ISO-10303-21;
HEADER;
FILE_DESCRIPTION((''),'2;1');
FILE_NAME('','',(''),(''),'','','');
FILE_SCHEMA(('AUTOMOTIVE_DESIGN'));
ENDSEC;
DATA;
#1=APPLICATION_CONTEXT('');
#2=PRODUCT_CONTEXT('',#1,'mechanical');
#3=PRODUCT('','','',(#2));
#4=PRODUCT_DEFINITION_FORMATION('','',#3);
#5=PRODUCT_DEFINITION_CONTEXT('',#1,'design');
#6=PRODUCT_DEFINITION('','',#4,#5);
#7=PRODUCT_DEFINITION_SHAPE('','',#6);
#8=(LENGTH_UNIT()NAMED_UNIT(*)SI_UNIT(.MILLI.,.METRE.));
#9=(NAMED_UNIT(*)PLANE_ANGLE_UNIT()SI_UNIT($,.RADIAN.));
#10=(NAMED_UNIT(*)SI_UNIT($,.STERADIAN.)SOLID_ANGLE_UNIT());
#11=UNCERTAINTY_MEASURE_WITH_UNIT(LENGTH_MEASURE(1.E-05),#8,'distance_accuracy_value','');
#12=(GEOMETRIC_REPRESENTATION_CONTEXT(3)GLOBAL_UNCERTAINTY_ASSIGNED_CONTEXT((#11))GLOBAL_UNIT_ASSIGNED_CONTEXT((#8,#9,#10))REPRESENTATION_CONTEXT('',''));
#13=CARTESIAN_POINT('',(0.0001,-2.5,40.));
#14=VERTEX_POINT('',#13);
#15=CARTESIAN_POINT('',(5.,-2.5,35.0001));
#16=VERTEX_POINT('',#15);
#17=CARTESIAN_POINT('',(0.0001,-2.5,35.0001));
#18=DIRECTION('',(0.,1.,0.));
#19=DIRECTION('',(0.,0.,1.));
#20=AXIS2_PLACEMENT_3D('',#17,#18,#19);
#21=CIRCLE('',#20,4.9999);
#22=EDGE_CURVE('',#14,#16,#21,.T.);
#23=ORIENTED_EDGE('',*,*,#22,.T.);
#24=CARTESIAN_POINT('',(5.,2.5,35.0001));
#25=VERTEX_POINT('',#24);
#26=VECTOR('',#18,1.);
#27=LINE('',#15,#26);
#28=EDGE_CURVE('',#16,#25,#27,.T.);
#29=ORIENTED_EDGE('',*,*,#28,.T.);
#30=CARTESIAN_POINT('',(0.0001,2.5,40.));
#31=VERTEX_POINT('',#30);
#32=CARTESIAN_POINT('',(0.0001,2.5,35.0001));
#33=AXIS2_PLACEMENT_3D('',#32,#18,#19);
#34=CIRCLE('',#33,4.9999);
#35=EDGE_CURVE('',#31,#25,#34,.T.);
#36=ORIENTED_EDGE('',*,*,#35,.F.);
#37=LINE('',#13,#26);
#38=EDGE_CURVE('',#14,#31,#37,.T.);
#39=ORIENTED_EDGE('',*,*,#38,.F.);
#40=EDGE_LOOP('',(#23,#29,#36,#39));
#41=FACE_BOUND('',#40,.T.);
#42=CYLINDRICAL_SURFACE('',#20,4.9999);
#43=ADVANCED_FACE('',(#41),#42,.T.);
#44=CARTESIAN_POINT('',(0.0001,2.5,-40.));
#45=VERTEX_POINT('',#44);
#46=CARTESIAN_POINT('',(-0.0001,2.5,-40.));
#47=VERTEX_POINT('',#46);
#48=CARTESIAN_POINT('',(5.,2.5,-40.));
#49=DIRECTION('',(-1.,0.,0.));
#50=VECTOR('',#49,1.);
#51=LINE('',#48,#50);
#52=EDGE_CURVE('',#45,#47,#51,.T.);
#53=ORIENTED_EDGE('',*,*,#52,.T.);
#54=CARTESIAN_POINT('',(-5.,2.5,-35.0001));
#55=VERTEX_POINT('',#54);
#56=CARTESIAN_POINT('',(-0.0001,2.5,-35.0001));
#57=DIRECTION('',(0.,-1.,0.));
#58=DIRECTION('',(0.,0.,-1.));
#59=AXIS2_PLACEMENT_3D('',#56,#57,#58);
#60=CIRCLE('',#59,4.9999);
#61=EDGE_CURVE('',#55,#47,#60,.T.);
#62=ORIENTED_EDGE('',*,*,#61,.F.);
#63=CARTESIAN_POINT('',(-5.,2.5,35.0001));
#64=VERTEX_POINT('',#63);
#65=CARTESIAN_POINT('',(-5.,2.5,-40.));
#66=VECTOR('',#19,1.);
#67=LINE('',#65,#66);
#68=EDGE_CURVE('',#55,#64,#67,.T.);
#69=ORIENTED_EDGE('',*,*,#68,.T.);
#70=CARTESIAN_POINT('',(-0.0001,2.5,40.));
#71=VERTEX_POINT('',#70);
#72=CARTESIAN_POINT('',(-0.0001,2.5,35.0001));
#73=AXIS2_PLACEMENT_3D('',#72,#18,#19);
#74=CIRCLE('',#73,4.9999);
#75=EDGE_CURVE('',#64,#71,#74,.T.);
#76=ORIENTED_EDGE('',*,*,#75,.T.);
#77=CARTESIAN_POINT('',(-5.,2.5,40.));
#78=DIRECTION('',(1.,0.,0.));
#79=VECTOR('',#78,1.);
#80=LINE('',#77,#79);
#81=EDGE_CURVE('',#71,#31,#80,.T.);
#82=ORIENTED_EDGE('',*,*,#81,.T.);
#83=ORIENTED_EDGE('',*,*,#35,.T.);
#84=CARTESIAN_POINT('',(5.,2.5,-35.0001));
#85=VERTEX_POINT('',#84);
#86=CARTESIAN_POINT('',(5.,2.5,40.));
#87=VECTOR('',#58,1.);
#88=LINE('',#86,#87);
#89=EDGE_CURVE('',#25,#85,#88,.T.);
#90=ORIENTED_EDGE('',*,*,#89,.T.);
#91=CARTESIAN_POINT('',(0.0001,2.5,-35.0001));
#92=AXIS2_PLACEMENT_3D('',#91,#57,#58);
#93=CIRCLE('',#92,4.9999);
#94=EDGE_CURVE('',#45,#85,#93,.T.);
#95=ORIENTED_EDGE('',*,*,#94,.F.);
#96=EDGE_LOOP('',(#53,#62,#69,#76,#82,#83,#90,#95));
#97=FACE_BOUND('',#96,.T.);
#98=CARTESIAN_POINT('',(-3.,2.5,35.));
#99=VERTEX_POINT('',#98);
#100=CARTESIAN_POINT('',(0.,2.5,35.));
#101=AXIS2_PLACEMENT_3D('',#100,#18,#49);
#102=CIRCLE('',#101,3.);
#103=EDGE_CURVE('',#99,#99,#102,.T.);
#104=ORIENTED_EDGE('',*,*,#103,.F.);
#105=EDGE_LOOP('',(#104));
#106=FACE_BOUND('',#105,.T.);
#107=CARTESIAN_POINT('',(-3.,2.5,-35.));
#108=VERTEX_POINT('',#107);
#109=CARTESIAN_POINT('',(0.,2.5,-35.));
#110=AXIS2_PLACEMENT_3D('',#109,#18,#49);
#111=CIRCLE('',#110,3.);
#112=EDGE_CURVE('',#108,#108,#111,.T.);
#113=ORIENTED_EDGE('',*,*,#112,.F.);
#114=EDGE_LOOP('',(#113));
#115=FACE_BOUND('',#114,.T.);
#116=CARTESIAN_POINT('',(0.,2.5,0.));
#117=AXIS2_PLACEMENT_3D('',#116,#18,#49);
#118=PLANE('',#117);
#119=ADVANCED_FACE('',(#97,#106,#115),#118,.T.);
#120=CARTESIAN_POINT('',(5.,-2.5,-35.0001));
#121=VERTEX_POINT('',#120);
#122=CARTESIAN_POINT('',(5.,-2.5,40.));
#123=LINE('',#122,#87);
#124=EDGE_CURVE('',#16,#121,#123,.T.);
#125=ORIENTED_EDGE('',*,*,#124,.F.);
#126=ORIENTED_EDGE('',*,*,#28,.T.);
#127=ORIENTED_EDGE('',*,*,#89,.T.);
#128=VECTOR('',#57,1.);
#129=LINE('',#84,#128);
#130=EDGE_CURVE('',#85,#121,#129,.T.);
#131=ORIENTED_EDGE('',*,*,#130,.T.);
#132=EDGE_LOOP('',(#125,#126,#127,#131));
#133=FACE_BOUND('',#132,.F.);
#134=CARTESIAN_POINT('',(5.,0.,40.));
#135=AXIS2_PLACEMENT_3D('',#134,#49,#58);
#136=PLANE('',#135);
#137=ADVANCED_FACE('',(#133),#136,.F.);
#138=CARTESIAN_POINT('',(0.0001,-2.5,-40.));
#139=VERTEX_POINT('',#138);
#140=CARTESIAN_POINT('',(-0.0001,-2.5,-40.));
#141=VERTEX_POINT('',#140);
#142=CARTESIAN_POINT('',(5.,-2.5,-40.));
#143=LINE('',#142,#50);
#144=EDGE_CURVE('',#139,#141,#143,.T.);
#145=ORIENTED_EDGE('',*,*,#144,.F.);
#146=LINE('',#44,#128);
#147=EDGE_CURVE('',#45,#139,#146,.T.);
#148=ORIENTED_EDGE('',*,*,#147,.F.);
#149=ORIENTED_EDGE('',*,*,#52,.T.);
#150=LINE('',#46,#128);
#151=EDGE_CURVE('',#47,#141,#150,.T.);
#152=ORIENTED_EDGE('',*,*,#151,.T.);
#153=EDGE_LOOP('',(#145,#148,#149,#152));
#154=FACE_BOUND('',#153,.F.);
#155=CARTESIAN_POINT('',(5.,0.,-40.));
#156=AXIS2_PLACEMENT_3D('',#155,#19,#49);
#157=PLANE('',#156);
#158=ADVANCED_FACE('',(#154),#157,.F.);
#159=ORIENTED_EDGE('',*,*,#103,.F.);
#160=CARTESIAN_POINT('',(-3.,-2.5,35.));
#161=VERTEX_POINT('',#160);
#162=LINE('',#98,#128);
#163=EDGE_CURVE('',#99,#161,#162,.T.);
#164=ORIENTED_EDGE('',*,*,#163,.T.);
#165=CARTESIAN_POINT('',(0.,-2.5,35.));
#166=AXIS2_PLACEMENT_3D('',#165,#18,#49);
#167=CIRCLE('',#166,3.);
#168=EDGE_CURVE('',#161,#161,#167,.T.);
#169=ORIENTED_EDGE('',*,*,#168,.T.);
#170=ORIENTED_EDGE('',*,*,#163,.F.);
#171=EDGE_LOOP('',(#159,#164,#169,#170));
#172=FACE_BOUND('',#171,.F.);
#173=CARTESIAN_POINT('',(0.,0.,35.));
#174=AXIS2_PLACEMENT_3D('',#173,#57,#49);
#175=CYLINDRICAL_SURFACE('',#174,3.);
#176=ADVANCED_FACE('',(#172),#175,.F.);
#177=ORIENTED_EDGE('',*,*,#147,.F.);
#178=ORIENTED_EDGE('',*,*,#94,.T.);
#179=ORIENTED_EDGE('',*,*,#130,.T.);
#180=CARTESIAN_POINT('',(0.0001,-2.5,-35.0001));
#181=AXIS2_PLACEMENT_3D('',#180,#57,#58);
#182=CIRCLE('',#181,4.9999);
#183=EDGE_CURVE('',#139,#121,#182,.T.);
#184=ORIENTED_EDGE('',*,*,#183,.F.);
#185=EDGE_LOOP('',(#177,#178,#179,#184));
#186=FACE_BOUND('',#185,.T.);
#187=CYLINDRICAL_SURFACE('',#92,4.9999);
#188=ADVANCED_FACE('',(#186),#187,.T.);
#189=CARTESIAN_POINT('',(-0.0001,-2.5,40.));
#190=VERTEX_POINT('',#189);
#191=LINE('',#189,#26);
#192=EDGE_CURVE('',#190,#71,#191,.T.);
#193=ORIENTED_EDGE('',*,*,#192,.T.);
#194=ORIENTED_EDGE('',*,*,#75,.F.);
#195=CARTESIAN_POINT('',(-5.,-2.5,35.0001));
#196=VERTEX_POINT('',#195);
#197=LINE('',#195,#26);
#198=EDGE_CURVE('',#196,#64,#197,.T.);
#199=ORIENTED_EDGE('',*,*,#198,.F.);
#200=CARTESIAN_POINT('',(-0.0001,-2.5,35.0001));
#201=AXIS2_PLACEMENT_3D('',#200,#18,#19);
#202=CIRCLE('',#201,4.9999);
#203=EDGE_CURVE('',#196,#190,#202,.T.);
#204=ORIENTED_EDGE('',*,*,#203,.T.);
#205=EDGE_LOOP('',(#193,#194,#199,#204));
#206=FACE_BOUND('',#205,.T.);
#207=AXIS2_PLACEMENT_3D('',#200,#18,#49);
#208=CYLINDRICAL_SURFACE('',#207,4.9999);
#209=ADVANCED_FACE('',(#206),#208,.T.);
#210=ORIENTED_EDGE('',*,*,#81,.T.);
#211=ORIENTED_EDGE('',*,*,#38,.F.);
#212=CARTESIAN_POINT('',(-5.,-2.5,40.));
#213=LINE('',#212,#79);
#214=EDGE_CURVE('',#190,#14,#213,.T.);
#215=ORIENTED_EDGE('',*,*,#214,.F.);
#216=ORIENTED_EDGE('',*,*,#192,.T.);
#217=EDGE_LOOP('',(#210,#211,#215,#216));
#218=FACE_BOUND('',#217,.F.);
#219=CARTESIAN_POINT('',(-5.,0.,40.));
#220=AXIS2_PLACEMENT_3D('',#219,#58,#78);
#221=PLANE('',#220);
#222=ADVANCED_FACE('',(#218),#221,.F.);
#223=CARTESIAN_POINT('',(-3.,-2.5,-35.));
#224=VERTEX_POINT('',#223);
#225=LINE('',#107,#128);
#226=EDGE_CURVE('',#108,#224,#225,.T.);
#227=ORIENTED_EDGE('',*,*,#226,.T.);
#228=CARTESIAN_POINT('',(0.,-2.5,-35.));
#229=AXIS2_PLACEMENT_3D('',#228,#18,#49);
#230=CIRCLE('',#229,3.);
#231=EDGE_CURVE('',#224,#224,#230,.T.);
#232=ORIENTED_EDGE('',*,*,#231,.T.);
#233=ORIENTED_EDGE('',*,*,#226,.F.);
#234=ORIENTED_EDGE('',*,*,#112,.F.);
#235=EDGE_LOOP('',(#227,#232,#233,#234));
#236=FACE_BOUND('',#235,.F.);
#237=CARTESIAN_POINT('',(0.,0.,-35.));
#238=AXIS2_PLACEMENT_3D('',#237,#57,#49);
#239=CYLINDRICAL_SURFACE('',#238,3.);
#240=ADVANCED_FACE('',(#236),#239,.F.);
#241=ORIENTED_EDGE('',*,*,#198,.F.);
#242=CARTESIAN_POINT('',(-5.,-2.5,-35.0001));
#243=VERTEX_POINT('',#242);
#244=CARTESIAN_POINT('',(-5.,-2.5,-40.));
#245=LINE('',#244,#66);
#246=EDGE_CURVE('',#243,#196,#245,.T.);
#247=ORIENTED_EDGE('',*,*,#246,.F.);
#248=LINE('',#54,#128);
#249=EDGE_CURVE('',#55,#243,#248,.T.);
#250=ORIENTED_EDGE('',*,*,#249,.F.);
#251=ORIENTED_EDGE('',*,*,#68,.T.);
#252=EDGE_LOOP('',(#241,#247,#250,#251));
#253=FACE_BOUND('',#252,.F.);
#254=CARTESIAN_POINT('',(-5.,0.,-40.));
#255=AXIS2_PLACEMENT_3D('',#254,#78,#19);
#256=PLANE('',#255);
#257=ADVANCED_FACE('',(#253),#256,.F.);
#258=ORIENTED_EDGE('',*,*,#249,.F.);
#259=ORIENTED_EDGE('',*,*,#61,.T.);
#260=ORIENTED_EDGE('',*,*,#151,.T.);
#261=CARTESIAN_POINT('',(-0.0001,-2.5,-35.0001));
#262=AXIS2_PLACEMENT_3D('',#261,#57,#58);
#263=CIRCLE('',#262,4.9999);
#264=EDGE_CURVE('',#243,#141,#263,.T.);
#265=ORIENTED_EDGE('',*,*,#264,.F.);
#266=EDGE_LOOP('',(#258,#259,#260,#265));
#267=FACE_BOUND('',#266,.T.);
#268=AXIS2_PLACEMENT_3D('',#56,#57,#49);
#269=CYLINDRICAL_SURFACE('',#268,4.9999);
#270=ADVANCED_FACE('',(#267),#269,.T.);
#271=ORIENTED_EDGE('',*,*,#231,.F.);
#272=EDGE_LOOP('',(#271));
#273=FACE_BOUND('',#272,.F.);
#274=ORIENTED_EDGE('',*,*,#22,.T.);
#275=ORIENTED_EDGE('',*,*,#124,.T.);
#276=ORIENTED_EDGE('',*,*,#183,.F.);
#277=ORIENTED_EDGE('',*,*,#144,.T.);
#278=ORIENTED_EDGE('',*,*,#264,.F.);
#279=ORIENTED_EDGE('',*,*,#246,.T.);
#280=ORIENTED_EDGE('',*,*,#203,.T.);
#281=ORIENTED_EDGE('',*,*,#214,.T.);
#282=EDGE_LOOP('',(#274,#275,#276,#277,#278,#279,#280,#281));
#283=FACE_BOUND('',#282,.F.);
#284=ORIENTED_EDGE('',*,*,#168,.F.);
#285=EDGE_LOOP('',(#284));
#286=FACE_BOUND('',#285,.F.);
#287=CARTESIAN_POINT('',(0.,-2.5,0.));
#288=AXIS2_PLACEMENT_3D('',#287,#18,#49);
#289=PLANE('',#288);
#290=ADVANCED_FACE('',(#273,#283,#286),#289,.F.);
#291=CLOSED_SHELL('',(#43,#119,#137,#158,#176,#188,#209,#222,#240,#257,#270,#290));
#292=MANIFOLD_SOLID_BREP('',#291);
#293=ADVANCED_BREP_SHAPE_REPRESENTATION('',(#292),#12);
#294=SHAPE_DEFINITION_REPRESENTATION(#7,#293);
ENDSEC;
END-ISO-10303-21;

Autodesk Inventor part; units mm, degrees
ref_plane "YZ Plane" through (0, 0, 0) normal (1, 0, 0) x (0, 1, 0)
ref_plane "XZ Plane" through (0, 0, 0) normal (0, 1, 0) x (-1, 0, 0)
ref_plane "XY Plane" through (0, 0, 0) normal (0, 0, 1) x (1, 0, 0)
sketch "Boceto1" plane through (0, 0, 0) normal (0, 1, 0) x (-1, 0, 0)
  line L0 (5, 40) -> (-5, 40)
  line L1 (-5, 40) -> (-5, -40)
  line L2 (-5, -40) -> (5, -40)
  line L3 (5, -40) -> (5, 40)
  line L4 (5, 40) -> (-5, -40) construction
  line L5 (-5, 40) -> (5, -40) construction
  circle A0 centre (0, 35) radius 3
  circle A1 centre (0, -35) radius 3
  point P0 (0, 0)
  dimension "d0" = 10
  dimension "d1" = 80
  dimension "d2" = 6
  dimension "d3" = 6
  dimension "d4" = 5
  dimension "d5" = 5
extrude "Extrusión1" add sketch "Boceto1" along normal mid plane 5
fillet "Empalme1" radius 5 4 edges at (-5, 0, 40) (5, 0, 40) (5, 0, -40) (-5, 0, -40)
properties material "Titanio"
